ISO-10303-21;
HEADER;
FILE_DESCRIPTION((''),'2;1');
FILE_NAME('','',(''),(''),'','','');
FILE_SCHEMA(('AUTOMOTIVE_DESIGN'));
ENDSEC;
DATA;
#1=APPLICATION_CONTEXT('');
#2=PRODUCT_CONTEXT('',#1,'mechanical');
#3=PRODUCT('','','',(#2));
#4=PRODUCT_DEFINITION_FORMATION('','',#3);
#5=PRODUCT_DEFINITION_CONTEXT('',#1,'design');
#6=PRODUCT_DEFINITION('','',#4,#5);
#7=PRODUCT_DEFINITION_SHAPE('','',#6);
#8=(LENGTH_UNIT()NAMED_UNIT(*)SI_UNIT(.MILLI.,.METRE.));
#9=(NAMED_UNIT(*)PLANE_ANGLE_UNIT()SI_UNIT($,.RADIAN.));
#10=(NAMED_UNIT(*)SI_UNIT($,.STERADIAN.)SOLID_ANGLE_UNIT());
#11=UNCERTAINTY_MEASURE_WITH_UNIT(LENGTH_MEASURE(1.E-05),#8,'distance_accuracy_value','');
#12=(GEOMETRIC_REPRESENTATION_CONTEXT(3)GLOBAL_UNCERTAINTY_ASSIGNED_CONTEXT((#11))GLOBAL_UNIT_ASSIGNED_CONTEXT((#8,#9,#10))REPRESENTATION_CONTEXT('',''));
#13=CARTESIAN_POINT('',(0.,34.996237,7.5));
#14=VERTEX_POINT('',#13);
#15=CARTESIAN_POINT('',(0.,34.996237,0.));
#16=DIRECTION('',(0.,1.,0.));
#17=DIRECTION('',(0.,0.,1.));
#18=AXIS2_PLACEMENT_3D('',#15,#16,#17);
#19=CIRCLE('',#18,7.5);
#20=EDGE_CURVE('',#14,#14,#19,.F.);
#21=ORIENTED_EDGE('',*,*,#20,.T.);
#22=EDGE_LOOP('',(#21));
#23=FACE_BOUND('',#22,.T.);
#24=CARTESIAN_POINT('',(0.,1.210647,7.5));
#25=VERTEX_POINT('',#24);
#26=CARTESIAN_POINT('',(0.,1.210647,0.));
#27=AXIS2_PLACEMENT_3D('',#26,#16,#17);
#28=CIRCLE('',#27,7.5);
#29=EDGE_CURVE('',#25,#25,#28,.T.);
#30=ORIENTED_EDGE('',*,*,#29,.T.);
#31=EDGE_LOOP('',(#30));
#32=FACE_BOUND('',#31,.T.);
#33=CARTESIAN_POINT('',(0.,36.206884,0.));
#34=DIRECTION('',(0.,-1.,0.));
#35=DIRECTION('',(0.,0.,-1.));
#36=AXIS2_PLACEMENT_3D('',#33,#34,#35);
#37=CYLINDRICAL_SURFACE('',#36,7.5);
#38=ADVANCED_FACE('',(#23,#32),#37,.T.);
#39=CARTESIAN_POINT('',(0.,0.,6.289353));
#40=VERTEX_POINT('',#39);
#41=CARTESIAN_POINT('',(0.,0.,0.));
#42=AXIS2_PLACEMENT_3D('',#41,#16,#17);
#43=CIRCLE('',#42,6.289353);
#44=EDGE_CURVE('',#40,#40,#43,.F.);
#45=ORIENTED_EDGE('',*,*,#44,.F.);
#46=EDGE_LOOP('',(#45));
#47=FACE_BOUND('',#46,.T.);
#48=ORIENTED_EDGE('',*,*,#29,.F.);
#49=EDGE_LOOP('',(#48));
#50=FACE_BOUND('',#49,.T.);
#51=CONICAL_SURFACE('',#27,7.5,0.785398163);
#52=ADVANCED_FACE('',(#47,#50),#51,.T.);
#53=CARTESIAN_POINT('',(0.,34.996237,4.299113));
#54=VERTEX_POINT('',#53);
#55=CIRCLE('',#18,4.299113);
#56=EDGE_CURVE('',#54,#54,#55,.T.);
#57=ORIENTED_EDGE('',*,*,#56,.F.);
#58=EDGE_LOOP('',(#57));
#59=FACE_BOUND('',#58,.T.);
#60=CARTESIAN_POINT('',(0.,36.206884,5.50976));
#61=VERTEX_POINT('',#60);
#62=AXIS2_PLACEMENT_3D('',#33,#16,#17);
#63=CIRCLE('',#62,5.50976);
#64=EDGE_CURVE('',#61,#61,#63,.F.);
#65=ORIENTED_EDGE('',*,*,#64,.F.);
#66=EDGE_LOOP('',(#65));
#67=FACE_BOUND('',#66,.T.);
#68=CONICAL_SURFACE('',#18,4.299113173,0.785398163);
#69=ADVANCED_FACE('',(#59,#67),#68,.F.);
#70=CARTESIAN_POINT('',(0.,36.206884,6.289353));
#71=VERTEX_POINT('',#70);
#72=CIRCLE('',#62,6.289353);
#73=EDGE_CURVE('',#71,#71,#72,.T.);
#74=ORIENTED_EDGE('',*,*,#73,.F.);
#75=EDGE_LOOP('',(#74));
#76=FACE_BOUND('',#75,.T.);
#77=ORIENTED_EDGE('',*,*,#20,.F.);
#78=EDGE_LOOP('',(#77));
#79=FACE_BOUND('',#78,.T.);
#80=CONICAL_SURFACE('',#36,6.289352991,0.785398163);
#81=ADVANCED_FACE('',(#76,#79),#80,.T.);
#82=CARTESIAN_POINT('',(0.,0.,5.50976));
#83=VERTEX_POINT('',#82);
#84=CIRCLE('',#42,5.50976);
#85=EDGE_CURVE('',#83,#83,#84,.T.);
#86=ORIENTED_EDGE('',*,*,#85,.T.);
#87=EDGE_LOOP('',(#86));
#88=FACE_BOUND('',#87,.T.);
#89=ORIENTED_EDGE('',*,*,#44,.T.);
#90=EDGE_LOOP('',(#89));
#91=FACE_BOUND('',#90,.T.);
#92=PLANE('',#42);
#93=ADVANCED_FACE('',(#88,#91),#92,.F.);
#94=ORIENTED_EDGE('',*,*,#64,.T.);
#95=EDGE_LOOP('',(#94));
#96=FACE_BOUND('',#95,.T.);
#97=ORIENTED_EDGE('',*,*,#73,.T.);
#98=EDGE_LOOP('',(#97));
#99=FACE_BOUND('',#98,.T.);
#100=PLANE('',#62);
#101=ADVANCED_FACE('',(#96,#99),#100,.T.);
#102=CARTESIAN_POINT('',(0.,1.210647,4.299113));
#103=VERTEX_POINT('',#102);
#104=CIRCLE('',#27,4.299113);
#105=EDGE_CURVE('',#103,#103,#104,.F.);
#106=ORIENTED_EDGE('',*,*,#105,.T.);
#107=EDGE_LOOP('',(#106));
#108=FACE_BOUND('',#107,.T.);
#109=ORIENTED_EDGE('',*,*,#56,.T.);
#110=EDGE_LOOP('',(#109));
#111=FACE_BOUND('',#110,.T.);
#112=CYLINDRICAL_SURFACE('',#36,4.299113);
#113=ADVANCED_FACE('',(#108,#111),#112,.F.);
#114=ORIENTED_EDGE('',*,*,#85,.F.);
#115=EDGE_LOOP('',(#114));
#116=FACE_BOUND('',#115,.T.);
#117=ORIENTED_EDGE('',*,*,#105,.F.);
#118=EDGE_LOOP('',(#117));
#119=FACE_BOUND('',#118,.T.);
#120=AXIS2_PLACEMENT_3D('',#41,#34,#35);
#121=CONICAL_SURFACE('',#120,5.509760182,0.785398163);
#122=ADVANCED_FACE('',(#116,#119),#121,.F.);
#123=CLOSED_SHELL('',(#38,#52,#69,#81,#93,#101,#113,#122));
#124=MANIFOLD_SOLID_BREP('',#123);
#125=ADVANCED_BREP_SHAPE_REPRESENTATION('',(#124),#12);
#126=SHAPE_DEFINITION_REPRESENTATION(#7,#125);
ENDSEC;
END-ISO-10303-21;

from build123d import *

# Parameters (mm, degrees)
SKETCH1_R           = 7.5
BOSS_EXTRUDE1_DEPTH = 36.206883899
SKETCH2_R           = 4.299113173
CUT_EXTRUDE1_DEPTH  = 38.728483161
CHAMFER1_SIZE       = 1.210647009


with BuildPart() as part:
    # Sketch1 → Boss-Extrude1 (new body)
    with BuildSketch(Plane(origin=(0, 0, 0), x_dir=(1, 0, 0), z_dir=(0, 1, 0))):
        Circle(SKETCH1_R)
    extrude(amount=BOSS_EXTRUDE1_DEPTH)

    # Sketch2 → Cut-Extrude1 (cut, through all)
    with BuildSketch(Plane(origin=(0, 0, 0), x_dir=(1, 0, 0), z_dir=(0, 1, 0))):
        Circle(SKETCH2_R)
    extrude(amount=CUT_EXTRUDE1_DEPTH, mode=Mode.SUBTRACT)

    # Chamfer1
    chamfer1_edges = [part.edges().sort_by_distance(p)[0] for p in [
        (-4.299113173, 36.206883899, 0),
        (-4.299113173, 0, 0),
        (-7.5, 0, 0),
        (-7.5, 36.206883899, 0),
    ]]
    chamfer(chamfer1_edges, length=CHAMFER1_SIZE)


solid = part.part
